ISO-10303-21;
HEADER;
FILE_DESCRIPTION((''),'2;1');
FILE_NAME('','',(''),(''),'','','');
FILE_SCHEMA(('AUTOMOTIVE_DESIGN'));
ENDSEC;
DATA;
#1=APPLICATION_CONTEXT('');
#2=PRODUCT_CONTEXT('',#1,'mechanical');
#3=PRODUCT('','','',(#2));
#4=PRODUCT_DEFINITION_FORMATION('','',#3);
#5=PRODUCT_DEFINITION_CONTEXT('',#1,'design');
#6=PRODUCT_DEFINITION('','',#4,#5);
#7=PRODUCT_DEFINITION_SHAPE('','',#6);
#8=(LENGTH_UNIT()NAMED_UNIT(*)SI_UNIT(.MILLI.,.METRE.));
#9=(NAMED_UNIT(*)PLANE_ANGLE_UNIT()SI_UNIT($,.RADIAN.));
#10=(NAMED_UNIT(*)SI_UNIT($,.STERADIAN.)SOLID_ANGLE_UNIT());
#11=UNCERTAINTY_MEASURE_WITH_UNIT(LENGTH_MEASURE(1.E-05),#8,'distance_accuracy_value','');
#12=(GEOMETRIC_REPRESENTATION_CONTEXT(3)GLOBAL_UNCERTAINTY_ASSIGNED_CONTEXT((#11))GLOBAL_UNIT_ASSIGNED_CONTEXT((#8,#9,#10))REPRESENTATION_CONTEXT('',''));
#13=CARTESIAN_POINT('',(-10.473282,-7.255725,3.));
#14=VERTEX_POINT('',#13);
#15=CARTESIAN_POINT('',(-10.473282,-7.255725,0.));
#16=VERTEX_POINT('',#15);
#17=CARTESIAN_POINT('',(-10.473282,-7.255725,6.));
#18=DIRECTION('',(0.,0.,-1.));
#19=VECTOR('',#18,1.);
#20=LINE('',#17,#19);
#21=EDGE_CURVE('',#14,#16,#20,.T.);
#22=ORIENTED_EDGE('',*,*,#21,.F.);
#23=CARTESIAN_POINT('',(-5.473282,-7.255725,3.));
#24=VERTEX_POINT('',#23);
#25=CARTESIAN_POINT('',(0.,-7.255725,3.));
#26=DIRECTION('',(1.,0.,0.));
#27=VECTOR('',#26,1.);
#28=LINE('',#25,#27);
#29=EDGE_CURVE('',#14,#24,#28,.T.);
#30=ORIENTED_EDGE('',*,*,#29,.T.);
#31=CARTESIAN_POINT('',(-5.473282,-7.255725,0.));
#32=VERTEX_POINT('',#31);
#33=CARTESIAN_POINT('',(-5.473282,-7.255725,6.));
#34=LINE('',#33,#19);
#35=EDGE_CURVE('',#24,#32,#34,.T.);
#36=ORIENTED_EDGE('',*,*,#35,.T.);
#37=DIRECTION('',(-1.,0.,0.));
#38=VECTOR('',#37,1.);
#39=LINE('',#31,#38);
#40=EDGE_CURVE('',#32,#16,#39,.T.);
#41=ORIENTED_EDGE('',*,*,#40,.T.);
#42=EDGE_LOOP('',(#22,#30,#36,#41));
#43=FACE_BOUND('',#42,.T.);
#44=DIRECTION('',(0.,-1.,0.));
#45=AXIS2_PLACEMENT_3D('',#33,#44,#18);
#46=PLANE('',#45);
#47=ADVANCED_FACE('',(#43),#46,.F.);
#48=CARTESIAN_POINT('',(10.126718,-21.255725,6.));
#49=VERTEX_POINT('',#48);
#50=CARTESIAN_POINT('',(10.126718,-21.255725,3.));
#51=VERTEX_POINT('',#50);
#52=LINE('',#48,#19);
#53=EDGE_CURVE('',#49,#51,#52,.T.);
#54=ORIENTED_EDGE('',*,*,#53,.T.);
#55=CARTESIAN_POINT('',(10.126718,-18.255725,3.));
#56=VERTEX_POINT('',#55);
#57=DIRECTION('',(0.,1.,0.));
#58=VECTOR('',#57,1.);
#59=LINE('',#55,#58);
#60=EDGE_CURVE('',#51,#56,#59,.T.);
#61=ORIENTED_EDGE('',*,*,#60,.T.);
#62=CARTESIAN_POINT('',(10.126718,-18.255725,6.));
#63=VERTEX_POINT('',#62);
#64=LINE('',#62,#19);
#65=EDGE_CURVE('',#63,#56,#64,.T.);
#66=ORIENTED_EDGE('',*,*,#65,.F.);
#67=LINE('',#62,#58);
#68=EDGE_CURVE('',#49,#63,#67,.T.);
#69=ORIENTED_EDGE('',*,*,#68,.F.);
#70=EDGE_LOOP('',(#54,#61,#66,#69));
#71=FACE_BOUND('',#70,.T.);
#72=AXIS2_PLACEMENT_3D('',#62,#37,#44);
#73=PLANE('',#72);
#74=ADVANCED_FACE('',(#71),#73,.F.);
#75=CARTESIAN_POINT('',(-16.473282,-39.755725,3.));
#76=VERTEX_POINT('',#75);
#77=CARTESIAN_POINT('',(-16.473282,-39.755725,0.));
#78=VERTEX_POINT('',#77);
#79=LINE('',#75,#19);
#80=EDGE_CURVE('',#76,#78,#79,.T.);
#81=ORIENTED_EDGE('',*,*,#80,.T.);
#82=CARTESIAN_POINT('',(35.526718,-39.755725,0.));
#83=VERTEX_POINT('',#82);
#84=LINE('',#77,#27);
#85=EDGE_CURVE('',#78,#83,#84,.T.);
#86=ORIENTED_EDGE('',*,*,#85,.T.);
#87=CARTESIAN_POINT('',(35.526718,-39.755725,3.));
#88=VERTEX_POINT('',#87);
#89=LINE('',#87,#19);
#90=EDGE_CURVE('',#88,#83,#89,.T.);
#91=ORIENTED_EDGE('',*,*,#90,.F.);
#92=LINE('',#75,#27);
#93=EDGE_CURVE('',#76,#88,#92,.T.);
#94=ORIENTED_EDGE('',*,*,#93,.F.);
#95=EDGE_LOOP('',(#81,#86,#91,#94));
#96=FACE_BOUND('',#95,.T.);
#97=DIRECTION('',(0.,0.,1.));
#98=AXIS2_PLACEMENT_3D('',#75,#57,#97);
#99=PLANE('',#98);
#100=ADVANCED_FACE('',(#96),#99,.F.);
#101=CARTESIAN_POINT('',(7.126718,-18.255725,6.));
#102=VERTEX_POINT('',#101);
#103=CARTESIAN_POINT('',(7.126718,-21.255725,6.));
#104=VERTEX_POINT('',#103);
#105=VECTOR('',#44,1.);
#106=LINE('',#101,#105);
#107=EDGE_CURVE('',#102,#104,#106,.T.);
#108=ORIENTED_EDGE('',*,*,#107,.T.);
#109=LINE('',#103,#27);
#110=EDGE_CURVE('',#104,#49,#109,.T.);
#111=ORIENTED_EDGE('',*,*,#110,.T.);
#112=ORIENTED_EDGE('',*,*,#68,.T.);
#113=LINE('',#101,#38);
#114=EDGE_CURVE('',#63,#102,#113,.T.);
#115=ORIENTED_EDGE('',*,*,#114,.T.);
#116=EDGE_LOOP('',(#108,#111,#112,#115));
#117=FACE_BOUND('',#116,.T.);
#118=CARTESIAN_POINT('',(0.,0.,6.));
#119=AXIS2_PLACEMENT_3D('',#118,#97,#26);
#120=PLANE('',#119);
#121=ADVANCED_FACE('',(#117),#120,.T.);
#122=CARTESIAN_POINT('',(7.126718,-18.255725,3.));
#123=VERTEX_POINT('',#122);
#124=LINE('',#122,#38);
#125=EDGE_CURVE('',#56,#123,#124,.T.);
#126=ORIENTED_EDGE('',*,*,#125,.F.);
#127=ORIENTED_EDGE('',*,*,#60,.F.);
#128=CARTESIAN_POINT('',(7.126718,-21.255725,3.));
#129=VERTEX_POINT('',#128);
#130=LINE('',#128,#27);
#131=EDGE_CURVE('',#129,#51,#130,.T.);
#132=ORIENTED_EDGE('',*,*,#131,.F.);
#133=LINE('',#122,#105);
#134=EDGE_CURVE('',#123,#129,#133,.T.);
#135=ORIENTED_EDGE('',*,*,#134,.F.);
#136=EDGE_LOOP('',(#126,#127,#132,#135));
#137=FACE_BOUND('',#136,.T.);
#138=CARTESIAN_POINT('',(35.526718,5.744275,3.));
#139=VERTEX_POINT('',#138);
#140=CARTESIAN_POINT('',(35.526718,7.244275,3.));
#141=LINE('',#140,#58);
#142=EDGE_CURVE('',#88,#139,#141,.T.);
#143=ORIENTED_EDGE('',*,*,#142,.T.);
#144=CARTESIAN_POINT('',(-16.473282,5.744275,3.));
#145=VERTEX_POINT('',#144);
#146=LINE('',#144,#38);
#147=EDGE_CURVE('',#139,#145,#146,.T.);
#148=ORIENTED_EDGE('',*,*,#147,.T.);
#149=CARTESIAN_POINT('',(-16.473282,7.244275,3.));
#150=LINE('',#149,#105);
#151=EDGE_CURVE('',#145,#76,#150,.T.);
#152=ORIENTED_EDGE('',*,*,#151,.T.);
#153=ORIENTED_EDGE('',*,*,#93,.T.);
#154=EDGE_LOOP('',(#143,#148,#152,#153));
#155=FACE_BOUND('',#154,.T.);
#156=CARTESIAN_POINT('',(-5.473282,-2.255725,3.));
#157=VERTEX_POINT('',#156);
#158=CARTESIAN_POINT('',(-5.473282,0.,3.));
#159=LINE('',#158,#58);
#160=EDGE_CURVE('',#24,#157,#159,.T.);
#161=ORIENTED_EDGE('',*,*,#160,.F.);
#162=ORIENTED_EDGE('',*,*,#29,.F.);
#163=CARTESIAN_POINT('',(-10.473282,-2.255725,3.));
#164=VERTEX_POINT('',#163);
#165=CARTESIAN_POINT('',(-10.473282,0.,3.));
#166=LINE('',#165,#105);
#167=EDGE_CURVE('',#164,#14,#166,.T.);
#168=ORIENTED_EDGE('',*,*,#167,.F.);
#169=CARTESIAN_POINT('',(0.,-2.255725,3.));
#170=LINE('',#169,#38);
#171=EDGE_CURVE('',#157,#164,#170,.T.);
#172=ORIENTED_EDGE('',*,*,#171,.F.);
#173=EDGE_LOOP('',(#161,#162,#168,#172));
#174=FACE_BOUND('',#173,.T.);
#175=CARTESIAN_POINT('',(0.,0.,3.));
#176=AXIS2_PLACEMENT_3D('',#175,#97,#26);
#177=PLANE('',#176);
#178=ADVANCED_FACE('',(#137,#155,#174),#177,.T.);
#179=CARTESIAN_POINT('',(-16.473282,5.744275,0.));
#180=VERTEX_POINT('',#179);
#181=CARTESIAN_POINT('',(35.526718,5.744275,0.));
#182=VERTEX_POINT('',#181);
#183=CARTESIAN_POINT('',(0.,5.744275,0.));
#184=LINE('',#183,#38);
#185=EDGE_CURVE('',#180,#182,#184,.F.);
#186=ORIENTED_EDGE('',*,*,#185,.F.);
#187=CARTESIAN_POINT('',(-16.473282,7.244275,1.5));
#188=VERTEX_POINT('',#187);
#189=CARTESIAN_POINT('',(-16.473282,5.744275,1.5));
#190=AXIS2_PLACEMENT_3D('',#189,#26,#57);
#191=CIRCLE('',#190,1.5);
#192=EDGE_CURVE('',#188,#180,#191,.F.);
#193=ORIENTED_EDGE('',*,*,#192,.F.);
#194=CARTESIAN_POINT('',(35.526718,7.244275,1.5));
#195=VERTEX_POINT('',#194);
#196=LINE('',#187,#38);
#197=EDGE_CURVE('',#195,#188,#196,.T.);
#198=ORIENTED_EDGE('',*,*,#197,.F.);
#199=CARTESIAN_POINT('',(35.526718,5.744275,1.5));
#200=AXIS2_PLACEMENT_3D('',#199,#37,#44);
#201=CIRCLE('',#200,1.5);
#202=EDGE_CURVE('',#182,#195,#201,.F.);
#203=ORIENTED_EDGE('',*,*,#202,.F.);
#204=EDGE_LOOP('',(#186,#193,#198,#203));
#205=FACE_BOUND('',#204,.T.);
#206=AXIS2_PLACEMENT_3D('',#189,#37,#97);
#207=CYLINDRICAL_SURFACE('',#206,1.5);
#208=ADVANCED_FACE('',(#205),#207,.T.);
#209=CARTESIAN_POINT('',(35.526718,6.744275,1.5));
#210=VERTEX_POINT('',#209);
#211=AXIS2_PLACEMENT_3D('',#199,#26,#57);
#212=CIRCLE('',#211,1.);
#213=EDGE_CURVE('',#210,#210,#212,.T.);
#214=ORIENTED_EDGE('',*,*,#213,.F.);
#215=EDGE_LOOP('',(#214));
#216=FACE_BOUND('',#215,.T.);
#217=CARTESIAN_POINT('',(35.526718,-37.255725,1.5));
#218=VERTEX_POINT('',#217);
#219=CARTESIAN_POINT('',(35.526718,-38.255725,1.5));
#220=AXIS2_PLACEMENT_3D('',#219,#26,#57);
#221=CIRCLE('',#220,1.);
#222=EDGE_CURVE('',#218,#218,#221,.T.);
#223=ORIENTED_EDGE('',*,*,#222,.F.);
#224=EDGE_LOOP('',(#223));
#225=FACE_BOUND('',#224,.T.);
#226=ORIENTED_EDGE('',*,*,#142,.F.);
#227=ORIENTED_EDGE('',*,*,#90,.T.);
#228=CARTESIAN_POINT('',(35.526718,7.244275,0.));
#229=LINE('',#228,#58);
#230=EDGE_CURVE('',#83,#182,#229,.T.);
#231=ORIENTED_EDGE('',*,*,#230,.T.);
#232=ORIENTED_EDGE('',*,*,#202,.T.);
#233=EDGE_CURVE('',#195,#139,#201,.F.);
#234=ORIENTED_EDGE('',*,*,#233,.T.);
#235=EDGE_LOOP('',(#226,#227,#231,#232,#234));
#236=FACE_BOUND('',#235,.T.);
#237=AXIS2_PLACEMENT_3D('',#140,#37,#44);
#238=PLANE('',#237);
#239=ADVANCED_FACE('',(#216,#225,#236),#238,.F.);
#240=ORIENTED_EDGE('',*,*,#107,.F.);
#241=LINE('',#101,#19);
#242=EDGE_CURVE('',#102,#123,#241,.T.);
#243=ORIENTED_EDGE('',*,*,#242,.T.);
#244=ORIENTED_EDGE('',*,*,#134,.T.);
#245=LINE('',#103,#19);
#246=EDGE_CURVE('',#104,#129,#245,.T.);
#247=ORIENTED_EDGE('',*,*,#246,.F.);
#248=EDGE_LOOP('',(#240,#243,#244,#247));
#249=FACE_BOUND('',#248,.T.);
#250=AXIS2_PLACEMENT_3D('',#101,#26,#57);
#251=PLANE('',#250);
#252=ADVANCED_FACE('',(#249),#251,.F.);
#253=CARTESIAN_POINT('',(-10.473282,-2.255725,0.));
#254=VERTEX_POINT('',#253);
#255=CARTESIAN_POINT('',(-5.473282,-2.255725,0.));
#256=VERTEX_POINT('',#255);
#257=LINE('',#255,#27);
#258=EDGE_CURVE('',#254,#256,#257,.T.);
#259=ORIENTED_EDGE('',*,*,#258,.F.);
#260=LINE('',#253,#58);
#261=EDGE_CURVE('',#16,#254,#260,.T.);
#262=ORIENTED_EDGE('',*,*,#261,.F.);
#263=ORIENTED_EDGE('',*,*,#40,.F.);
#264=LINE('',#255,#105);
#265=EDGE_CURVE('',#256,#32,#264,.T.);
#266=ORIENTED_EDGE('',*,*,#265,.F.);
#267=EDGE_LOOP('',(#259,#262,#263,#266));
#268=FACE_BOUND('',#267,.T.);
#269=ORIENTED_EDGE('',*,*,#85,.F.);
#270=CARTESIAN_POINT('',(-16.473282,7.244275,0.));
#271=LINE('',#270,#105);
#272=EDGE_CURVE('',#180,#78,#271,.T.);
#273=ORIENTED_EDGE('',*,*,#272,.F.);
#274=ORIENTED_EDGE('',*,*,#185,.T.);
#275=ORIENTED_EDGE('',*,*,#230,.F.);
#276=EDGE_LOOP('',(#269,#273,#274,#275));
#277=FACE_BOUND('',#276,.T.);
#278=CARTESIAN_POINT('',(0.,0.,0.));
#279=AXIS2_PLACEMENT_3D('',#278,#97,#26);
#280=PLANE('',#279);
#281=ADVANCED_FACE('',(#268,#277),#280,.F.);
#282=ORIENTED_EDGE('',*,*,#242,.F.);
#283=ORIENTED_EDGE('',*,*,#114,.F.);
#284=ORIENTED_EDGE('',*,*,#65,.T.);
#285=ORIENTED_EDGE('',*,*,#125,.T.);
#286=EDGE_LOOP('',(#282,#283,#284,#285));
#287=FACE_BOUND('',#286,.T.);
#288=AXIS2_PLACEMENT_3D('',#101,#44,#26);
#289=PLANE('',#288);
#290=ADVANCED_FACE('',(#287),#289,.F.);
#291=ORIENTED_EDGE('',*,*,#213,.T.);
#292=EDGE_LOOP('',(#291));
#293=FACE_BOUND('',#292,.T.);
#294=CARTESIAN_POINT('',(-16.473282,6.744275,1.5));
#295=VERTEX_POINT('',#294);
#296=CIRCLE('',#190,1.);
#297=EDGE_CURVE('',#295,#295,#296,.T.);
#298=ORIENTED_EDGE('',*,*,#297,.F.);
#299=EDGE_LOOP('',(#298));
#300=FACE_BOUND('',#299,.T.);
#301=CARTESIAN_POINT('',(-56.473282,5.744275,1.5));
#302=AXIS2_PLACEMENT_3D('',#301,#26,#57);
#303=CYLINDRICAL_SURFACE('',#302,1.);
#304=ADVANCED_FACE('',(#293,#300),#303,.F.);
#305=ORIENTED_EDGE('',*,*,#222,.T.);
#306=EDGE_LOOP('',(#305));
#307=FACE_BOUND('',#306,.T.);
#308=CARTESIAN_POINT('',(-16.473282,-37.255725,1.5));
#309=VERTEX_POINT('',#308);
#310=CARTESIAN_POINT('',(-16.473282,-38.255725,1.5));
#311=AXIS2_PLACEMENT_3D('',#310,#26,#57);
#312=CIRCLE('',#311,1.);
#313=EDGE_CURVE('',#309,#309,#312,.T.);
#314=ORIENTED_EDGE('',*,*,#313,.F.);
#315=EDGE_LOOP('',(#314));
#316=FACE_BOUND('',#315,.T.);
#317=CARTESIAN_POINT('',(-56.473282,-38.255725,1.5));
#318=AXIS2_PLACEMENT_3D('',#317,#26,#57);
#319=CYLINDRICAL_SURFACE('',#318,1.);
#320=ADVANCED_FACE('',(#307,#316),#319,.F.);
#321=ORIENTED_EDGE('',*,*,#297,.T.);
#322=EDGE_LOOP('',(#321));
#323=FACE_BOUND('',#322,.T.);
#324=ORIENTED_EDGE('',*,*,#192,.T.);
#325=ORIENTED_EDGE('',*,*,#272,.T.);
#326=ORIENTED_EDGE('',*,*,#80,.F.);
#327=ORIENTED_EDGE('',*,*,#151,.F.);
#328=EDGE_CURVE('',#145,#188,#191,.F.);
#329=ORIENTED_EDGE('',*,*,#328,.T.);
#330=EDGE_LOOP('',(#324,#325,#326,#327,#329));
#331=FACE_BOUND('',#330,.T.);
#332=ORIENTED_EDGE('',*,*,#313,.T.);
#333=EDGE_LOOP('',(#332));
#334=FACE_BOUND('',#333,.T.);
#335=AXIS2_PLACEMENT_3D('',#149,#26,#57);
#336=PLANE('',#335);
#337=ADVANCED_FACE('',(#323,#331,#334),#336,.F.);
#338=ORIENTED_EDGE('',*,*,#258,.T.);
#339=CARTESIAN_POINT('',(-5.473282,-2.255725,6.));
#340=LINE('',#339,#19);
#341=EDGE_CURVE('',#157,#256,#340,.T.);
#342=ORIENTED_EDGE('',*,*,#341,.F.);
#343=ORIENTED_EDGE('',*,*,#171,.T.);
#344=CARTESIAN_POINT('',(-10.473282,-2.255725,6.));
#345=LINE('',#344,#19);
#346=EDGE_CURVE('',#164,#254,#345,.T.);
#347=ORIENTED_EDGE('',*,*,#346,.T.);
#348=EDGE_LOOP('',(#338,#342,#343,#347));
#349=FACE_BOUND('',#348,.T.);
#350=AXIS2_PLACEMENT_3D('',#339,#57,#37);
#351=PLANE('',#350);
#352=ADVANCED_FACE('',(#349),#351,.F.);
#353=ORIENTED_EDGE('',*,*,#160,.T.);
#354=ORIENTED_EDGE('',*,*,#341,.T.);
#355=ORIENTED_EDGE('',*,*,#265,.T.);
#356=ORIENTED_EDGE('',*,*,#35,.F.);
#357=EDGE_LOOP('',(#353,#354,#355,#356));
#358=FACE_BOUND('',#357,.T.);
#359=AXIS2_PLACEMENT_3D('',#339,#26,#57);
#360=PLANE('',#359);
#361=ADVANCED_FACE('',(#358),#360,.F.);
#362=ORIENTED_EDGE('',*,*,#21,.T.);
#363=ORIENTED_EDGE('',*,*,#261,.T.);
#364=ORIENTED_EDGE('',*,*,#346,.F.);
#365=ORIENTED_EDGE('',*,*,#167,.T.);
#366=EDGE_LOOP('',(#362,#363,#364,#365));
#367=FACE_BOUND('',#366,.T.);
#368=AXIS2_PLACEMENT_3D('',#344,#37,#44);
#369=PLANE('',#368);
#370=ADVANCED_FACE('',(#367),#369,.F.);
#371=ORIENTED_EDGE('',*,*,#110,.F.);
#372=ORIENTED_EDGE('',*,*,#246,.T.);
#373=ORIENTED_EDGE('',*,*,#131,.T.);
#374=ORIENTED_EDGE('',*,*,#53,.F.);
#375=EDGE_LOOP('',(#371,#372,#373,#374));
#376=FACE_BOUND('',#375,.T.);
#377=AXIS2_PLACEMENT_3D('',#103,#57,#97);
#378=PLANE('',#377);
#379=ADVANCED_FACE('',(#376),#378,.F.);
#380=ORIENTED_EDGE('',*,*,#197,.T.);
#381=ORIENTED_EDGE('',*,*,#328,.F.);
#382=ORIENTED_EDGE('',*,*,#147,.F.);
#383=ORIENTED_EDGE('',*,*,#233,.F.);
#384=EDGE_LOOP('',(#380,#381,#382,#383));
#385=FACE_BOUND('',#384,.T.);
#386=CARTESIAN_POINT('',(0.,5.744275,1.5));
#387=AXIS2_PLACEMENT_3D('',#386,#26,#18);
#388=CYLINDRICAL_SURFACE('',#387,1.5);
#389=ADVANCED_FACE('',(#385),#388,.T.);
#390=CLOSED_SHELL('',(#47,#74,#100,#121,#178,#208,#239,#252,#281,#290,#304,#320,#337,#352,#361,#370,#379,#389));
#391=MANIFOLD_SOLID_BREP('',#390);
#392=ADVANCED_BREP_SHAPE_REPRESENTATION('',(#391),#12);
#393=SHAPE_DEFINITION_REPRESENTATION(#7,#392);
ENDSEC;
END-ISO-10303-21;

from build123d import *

# Parameters (mm, degrees)
SKETCH_1_W          = 52
SKETCH_1_H          = 47
EXTRUDE_1_DEPTH     = 3
SKETCH_2_R          = 1
CUT_EXTRUDE_1_DEPTH = 92
FILLET_1_R          = 1.5
FILLET_2_R          = 1.5
SKETCH_3_R          = 1
CUT_EXTRUDE_2_DEPTH = 92
SKETCH_4_W          = 3
SKETCH_4_H          = 3
EXTRUDE_2_DEPTH     = 3
SKETCH_5_W          = 5
SKETCH_5_H          = 5
CUT_EXTRUDE_3_DEPTH = 6


with BuildPart() as part:
    # 草图1 → 凸台-拉伸1 (new body)
    with BuildSketch(Plane.XY):
        with Locations((9.526717557, -16.255725191)):
            Rectangle(SKETCH_1_W, SKETCH_1_H)
    extrude(amount=EXTRUDE_1_DEPTH)

    # 草图2 → 切除-拉伸1 (cut)
    with BuildSketch(Plane(origin=(35.526717557, 0, 0), x_dir=(0, 0, -1), z_dir=(1, 0, 0))):
        with Locations(Location((-1.5, 5.744274809, 0), (0, 0, 90))):
            Circle(SKETCH_2_R)
    extrude(amount=-CUT_EXTRUDE_1_DEPTH, mode=Mode.SUBTRACT)

    # 圆角1
    fillet_1_edges = [part.edges().sort_by_distance(p)[0] for p in [
        (9.526717557, 7.244274809, 0),
    ]]
    fillet(fillet_1_edges, radius=FILLET_1_R)

    # 圆角2
    fillet_2_edges = [part.edges().sort_by_distance(p)[0] for p in [
        (9.526717557, 7.244274809, 3),
    ]]
    fillet(fillet_2_edges, radius=FILLET_2_R - 0.0001)  # a hair under: the kernel refuses the full size

    # 草图3 → 切除-拉伸2 (cut)
    with BuildSketch(Plane(origin=(35.526717557, 0, 0), x_dir=(0, 0, -1), z_dir=(1, 0, 0))):
        with Locations(Location((-1.5, -38.255725191, 0), (0, 0, 90))):
            Circle(SKETCH_3_R)
    extrude(amount=-CUT_EXTRUDE_2_DEPTH, mode=Mode.SUBTRACT)

    # 草图4 → 凸台-拉伸2 (add)
    with BuildSketch(Plane.XY.offset(3)):
        with Locations((8.626717557, -19.755725191)):
            Rectangle(SKETCH_4_W, SKETCH_4_H)
    extrude(amount=EXTRUDE_2_DEPTH)

    # 草图5 → 切除-拉伸3 (cut)
    with BuildSketch(Plane(origin=(0, 0, 0), x_dir=(-1, 0, 0), z_dir=(0, 0, -1))):
        with Locations((7.973282443, -4.755725191)):
            Rectangle(SKETCH_5_W, SKETCH_5_H)
    extrude(amount=-CUT_EXTRUDE_3_DEPTH, mode=Mode.SUBTRACT)


solid = part.part
